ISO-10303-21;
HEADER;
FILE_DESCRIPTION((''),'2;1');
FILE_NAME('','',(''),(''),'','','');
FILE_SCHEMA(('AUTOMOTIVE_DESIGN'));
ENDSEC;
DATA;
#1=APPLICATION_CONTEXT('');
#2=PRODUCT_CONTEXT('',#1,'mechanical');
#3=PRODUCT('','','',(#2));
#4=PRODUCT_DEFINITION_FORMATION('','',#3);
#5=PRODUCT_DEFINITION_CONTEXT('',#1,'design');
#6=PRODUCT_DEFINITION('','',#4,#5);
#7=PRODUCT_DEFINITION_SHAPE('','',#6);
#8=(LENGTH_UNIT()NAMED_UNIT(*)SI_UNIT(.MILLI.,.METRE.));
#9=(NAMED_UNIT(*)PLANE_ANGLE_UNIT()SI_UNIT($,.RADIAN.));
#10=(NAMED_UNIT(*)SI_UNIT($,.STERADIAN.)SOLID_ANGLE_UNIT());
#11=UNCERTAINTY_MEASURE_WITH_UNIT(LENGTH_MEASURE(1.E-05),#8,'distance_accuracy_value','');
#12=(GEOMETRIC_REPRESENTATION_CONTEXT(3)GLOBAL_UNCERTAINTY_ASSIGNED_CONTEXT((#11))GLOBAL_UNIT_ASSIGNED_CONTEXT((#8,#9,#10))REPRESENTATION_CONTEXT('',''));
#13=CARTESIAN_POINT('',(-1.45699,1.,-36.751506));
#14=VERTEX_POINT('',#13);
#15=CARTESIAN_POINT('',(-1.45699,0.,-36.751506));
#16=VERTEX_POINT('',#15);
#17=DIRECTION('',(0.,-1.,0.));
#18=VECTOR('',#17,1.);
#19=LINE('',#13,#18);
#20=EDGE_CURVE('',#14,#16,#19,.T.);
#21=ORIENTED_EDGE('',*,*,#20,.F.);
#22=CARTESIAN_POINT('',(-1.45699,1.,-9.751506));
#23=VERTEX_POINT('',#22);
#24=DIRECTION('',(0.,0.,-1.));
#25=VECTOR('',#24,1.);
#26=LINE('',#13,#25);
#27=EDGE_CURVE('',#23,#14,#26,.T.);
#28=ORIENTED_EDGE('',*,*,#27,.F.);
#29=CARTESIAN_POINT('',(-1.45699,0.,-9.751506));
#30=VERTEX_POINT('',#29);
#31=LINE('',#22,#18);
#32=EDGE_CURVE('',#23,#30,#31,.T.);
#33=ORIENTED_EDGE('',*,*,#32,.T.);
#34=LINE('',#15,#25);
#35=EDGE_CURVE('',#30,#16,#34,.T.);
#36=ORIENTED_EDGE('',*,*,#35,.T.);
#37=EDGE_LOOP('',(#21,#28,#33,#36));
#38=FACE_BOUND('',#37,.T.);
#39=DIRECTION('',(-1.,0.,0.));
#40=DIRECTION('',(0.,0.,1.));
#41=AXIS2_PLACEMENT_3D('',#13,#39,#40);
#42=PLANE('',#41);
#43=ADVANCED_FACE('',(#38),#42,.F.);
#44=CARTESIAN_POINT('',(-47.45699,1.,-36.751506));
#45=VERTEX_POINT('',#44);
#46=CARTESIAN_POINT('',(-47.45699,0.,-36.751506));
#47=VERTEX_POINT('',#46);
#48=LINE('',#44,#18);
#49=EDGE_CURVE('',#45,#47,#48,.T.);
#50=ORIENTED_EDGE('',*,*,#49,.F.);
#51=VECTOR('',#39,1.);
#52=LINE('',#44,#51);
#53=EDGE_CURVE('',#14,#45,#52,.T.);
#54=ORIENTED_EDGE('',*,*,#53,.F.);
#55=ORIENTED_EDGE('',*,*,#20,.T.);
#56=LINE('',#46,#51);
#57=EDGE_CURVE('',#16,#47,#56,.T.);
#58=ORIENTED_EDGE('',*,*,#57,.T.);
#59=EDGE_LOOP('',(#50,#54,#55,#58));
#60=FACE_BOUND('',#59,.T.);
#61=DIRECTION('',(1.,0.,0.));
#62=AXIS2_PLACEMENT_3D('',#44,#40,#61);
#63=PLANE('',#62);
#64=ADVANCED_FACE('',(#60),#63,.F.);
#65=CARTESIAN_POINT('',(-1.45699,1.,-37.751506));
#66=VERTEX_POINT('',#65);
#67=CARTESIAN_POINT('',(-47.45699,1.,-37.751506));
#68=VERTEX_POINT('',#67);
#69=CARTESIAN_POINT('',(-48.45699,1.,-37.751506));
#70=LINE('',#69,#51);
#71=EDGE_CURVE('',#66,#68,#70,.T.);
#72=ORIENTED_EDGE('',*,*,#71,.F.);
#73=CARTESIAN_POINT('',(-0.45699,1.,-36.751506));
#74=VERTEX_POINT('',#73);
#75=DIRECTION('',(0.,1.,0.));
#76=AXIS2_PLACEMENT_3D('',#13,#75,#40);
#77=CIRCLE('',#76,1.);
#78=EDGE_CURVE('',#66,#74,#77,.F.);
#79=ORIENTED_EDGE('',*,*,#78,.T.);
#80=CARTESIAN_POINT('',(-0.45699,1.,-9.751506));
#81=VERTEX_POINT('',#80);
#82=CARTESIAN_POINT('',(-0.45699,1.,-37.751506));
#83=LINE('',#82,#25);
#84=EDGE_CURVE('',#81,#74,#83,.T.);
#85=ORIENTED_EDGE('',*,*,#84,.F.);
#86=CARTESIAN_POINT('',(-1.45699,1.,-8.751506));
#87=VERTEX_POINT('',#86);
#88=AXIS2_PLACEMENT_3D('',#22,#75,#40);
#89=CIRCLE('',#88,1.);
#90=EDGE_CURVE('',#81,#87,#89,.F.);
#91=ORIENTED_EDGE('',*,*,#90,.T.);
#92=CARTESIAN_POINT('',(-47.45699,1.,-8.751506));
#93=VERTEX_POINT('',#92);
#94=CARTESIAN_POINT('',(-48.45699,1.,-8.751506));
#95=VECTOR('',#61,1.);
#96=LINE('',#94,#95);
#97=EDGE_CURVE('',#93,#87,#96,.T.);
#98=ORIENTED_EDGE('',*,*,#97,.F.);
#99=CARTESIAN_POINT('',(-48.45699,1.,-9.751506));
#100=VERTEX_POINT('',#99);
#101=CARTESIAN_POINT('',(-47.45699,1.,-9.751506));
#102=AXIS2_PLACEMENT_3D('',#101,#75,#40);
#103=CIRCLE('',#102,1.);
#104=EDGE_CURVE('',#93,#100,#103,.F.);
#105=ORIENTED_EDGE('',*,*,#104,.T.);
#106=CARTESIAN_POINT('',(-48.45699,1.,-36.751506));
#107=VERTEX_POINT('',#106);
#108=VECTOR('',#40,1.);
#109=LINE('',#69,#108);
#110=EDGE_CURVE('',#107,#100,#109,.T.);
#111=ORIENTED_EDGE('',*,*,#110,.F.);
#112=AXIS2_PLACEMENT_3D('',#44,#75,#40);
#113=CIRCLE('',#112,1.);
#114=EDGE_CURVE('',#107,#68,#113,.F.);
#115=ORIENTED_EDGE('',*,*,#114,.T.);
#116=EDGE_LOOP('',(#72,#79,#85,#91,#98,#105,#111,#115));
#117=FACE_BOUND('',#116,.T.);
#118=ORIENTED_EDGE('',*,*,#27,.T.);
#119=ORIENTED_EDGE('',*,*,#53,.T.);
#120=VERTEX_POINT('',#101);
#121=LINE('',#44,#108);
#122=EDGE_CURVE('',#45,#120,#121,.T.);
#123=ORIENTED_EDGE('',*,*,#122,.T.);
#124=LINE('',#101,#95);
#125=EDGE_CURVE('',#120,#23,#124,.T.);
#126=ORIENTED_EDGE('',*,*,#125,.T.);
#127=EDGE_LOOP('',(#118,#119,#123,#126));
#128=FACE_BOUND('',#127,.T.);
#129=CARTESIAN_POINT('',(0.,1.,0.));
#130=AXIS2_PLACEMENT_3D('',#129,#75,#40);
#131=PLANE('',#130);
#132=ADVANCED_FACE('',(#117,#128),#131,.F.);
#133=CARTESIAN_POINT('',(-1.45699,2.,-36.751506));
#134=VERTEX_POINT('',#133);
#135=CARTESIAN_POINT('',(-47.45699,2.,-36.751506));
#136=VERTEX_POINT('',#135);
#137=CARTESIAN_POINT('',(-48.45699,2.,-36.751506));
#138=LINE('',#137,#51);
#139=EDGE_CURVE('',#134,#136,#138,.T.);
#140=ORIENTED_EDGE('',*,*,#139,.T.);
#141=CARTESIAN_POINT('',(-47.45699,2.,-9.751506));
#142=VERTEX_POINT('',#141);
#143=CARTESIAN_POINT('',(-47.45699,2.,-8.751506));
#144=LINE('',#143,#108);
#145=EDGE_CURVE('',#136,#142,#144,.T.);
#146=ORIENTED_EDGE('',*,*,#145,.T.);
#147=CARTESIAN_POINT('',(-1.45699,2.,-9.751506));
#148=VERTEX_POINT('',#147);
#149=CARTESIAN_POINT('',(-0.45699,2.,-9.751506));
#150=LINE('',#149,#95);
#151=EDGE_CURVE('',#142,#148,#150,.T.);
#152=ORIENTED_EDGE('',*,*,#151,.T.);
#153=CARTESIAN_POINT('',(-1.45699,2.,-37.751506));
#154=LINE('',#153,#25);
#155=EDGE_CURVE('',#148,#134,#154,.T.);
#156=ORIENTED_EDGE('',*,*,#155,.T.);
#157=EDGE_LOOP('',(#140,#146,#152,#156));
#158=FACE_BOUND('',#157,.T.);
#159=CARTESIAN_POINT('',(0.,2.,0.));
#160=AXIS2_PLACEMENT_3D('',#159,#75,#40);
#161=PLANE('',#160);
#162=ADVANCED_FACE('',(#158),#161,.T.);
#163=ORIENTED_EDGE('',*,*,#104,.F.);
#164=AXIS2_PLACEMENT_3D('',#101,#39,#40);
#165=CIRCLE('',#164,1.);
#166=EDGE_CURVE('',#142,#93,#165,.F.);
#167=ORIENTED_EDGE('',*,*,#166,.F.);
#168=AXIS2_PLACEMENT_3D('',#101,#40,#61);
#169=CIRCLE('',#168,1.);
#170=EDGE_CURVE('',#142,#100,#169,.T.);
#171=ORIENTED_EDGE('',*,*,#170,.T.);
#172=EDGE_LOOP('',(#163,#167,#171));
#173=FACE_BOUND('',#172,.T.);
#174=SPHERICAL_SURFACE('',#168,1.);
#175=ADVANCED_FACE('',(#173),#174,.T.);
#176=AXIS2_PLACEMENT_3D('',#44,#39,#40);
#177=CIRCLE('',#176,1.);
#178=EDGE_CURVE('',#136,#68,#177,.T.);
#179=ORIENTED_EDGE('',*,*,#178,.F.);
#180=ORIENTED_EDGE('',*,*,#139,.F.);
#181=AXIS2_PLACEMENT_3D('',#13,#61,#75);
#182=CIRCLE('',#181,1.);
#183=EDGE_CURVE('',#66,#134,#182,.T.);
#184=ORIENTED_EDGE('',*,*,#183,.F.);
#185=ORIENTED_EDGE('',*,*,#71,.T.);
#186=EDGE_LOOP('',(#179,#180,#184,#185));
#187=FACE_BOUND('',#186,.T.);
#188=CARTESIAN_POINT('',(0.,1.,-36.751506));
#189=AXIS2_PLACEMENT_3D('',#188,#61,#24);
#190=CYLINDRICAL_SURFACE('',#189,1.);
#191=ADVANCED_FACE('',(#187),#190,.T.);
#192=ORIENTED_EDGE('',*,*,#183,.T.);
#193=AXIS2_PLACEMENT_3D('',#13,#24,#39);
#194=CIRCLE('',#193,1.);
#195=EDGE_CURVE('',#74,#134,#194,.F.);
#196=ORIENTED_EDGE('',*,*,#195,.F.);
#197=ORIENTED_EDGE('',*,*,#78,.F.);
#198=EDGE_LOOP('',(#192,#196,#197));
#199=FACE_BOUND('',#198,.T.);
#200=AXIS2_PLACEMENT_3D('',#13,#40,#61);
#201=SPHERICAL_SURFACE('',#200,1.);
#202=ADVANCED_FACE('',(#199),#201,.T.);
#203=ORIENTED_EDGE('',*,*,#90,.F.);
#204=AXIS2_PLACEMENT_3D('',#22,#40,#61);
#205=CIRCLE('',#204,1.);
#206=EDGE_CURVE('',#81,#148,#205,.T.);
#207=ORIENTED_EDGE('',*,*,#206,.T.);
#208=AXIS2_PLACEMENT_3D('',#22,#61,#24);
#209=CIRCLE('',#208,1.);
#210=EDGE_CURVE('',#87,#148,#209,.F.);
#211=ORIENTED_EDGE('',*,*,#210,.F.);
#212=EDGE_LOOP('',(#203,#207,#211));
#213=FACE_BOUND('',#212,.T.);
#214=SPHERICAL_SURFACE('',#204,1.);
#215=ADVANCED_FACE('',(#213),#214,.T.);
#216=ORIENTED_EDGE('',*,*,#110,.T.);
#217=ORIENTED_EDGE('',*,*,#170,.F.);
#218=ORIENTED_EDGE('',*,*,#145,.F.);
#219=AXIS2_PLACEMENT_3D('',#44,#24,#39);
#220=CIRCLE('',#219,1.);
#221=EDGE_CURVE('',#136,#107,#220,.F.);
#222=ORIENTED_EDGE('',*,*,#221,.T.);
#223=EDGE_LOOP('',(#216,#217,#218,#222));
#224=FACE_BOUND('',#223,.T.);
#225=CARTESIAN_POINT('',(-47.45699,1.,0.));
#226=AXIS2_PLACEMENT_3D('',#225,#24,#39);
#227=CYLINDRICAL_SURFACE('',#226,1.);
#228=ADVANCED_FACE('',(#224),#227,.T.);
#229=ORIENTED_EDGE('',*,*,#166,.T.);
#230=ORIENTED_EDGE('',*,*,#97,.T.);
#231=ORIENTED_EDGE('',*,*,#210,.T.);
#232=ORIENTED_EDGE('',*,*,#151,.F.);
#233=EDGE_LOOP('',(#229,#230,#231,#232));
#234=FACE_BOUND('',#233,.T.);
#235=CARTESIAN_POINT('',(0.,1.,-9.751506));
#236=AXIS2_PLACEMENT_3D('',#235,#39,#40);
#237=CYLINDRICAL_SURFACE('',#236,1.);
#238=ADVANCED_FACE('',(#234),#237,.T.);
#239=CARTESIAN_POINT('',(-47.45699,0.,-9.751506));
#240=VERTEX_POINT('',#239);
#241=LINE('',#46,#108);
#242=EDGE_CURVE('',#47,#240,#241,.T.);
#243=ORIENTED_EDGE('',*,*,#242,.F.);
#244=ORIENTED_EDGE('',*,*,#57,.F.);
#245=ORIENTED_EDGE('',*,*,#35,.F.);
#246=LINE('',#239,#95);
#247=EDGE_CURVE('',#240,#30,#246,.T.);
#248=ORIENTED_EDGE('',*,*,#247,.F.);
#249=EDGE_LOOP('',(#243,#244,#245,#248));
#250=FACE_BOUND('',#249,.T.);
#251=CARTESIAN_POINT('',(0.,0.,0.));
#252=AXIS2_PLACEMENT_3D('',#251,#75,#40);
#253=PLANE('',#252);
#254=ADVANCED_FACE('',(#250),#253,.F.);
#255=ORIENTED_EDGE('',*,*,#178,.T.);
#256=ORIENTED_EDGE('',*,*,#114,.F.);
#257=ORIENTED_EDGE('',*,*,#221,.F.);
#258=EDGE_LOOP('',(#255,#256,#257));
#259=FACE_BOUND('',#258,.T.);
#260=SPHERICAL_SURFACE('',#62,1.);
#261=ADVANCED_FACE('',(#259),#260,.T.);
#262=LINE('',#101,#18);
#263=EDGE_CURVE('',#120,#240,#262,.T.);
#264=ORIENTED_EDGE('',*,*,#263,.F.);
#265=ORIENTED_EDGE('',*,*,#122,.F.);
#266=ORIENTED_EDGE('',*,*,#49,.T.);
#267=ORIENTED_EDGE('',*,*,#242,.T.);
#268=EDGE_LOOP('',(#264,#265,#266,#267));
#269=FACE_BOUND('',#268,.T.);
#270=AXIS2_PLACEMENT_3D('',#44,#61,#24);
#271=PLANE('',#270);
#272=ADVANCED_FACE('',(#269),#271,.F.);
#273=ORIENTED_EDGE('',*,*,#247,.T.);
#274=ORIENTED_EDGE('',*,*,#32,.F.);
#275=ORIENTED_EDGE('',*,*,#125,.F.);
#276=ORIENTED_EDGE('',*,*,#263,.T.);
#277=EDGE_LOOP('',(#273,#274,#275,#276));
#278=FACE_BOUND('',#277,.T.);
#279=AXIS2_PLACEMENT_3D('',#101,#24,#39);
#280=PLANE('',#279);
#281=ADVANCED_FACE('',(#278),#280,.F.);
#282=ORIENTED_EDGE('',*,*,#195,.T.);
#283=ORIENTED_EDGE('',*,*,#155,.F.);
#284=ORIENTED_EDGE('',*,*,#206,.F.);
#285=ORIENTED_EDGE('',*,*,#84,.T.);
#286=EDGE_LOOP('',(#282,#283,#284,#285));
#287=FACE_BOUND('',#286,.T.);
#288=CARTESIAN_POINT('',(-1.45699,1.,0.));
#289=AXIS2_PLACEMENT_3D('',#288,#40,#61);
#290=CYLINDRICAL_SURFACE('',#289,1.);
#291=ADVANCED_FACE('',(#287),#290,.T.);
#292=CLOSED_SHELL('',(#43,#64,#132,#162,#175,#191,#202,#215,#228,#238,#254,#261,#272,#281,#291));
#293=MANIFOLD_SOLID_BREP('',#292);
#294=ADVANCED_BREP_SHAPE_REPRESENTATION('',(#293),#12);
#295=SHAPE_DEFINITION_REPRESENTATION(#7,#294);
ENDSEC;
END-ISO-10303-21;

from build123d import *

# Parameters (mm, degrees)
SKETCH_1_W      = 46
SKETCH_1_H      = 27
EXTRUDE_1_DEPTH = 1
SKETCH_2_W      = 48
SKETCH_2_H      = 29
EXTRUDE_2_DEPTH = 1
FILLET_1_R      = 1


with BuildPart() as part:
    # ｽｹｯﾁ1 → ﾎﾞｽ - 押し出し1 (new body)
    with BuildSketch(Plane(origin=(0, 0, 0), x_dir=(1, 0, 0), z_dir=(0, 1, 0))):
        with Locations((-24.456990453, 23.251505547)):
            Rectangle(SKETCH_1_W, SKETCH_1_H)
    extrude(amount=EXTRUDE_1_DEPTH)

    # ｽｹｯﾁ2 → ﾎﾞｽ - 押し出し2 (add)
    with BuildSketch(Plane(origin=(0, 1, 0), x_dir=(1, 0, 0), z_dir=(0, 1, 0))):
        with Locations((-24.456990453, 23.251505547)):
            Rectangle(SKETCH_2_W, SKETCH_2_H)
    extrude(amount=EXTRUDE_2_DEPTH)

    # ﾌｨﾚｯﾄ1
    fillet_1_edges = [part.edges().sort_by_distance(p)[0] for p in [
        (-48.456990453, 1.5, -37.751505547),
        (-48.456990453, 1.5, -8.751505547),
        (-0.456990453, 1.5, -8.751505547),
        (-0.456990453, 1.5, -37.751505547),
        (-48.456990453, 2, -23.251505547),
        (-24.456990453, 2, -8.751505547),
        (-0.456990453, 2, -23.251505547),
        (-24.456990453, 2, -37.751505547),
    ]]
    fillet(fillet_1_edges, radius=FILLET_1_R - 0.0001)  # a hair under: the kernel refuses the full size


solid = part.part
